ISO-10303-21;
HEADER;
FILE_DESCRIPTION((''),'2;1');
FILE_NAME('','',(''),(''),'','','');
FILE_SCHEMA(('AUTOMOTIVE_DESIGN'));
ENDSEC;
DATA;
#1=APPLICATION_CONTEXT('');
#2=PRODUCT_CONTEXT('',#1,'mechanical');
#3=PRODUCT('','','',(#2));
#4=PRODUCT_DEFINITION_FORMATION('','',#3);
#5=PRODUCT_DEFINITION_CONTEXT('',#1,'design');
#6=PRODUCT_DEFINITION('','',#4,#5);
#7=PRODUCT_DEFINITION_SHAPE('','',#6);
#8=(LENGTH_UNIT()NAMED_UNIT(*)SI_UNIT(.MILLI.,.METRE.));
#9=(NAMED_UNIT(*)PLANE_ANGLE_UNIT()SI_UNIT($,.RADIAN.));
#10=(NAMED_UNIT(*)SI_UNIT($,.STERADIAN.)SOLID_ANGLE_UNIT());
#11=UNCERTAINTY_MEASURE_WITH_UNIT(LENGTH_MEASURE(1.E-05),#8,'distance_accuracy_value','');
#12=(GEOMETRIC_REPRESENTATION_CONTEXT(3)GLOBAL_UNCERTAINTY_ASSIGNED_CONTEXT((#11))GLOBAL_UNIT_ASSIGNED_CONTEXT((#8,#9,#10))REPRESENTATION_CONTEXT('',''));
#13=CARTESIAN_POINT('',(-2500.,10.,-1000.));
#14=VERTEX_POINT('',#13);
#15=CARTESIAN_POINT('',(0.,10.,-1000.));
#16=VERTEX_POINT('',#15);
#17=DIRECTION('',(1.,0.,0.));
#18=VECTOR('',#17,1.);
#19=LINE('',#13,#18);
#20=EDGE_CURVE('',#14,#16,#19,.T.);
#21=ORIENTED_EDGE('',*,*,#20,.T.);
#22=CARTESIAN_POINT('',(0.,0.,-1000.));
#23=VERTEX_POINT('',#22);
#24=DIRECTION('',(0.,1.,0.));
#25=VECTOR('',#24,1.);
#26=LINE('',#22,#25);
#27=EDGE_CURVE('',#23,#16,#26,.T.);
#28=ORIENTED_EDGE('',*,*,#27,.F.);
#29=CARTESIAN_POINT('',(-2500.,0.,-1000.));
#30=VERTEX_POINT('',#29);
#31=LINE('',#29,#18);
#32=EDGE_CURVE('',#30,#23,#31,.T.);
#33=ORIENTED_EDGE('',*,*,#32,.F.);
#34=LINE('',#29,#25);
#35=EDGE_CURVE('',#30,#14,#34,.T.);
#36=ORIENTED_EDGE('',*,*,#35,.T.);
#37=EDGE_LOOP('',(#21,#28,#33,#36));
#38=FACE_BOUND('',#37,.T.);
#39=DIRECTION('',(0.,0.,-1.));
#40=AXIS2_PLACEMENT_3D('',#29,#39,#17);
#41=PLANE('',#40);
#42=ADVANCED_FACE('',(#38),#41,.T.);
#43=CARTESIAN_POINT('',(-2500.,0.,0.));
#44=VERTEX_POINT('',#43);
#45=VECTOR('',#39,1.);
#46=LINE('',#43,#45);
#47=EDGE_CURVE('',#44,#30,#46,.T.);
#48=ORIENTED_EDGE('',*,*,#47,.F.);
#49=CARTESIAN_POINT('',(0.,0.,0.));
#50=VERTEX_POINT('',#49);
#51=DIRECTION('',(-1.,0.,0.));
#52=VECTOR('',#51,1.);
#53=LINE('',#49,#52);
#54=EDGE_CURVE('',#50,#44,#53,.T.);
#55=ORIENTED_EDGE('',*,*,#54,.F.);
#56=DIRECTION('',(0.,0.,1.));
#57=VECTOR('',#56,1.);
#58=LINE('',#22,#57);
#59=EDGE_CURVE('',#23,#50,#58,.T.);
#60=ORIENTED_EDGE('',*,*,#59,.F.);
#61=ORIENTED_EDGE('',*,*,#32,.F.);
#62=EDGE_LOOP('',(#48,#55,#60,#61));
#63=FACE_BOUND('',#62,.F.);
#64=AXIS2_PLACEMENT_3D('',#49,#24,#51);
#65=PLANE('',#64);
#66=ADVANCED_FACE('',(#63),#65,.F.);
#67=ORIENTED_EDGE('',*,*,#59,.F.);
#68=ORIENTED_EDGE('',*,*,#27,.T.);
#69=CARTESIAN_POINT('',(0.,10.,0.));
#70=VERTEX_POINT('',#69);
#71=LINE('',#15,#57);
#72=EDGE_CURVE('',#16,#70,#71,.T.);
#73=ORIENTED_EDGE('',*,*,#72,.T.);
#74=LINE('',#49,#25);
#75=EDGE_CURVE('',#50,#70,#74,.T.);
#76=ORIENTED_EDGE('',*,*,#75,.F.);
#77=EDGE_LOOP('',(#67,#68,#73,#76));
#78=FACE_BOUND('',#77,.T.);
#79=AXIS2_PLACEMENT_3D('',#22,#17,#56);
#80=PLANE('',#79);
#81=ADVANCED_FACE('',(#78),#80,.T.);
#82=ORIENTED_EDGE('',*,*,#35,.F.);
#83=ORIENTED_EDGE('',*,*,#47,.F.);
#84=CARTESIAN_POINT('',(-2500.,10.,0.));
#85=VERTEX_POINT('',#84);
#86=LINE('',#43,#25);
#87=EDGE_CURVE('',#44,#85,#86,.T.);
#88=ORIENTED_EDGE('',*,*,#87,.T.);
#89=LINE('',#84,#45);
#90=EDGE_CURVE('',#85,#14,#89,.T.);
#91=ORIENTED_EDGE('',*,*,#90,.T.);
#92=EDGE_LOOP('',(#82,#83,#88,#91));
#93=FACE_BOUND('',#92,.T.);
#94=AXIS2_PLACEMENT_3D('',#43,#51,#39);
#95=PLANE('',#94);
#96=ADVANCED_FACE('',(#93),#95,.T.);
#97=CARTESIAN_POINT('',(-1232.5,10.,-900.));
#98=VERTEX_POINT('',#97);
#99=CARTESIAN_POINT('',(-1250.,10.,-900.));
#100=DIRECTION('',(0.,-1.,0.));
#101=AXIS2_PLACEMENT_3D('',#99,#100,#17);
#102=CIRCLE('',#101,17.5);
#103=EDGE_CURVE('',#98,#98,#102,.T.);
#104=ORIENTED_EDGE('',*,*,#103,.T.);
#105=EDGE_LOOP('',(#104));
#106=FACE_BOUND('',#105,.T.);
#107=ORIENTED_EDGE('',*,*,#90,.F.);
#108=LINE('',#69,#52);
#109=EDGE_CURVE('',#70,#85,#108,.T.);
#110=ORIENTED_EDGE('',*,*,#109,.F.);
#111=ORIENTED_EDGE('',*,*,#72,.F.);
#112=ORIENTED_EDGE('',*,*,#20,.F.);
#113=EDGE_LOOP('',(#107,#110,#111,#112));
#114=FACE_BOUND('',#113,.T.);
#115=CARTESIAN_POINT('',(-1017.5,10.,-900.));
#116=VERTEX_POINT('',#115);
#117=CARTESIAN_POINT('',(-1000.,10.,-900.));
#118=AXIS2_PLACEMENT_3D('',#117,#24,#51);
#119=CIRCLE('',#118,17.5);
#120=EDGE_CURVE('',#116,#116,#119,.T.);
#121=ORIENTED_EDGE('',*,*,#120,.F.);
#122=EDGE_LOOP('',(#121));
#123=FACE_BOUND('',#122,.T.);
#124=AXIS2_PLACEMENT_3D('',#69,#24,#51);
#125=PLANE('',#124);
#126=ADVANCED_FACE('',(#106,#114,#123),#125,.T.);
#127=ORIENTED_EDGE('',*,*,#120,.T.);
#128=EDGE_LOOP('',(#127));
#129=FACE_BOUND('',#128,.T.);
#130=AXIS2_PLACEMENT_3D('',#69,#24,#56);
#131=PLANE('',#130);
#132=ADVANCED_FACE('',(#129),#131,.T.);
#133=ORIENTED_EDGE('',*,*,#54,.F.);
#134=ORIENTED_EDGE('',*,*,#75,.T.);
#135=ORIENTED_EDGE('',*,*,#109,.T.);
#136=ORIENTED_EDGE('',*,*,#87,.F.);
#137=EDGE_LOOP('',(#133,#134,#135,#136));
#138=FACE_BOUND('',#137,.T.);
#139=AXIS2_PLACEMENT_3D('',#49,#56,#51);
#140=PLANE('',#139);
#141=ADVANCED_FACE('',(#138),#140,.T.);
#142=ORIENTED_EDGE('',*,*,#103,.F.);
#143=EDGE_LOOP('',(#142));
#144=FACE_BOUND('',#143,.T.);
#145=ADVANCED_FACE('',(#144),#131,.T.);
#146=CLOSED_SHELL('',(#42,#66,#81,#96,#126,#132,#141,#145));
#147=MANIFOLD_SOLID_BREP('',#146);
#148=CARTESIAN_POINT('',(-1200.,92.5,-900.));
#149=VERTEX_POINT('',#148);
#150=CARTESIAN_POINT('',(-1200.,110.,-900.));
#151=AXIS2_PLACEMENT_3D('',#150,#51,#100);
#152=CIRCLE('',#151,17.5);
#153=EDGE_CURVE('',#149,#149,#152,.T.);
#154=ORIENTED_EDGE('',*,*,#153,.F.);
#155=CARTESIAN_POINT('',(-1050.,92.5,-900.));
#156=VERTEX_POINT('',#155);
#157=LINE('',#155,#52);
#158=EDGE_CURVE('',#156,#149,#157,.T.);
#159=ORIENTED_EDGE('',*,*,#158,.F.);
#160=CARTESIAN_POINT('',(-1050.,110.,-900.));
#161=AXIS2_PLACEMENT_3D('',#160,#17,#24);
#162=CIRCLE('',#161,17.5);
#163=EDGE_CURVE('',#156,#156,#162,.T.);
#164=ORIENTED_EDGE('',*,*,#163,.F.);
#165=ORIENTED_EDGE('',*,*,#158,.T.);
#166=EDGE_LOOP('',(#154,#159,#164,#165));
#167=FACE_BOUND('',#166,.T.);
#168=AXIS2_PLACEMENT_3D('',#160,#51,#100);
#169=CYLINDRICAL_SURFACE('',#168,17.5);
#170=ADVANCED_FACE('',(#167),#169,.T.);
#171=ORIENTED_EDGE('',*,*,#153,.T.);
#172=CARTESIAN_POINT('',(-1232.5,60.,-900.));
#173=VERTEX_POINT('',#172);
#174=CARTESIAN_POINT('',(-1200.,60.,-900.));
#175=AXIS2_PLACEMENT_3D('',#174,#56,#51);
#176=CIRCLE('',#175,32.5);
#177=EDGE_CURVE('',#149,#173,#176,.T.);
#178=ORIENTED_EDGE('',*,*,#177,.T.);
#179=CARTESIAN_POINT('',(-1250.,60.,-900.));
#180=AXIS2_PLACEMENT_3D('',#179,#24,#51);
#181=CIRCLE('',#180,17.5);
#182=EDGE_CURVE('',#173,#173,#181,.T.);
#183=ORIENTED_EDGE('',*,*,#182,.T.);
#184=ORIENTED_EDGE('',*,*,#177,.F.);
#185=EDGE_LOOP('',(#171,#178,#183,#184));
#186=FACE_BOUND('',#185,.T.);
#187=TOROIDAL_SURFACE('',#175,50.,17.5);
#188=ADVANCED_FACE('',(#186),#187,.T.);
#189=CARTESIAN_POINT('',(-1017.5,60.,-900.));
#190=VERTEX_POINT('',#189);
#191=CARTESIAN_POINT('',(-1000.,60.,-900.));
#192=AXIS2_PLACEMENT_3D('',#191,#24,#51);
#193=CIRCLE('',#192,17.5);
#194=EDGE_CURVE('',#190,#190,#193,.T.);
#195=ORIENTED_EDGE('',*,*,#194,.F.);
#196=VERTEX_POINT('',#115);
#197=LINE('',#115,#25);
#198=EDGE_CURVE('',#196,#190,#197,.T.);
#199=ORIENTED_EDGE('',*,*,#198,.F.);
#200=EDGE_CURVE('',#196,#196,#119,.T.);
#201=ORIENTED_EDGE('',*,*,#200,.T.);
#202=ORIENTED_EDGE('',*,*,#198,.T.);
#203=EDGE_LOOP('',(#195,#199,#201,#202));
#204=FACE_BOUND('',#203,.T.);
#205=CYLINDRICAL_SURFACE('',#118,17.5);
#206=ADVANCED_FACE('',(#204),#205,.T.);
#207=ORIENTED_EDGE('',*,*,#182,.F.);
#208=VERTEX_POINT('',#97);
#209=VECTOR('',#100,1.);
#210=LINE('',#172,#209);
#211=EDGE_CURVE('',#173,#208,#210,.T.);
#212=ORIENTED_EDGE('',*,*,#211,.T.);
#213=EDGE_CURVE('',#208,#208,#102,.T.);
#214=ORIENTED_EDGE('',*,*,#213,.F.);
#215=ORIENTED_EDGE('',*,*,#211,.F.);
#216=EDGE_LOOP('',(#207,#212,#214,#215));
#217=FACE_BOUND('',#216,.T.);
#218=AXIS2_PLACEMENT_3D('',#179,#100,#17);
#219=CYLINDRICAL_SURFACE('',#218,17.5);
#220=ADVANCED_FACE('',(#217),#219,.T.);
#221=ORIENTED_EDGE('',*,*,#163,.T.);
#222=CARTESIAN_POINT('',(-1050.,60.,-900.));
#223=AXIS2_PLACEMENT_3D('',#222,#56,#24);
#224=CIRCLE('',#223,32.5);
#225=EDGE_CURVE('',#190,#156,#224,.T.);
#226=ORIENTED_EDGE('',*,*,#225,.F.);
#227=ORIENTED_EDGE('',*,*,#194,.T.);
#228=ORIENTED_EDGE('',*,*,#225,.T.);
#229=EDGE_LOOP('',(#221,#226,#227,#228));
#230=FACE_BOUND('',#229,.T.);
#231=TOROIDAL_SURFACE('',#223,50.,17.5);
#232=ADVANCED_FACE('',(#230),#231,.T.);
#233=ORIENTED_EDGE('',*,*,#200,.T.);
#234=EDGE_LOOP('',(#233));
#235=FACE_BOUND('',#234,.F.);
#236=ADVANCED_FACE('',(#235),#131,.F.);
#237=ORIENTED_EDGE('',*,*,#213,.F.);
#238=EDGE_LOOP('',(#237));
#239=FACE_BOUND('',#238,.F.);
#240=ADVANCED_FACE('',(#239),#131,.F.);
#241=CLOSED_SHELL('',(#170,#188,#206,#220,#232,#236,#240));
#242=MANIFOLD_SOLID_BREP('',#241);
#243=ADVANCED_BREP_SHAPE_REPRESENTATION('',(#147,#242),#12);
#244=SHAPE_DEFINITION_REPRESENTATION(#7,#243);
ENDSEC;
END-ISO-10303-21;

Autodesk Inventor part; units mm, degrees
ref_plane "YZ Plane" through (0, 0, 0) normal (1, 0, 0) x (0, 1, 0)
sketch "Sketch1" plane through (0, 0, 0) normal (0, 1, 0) x (-1, 0, 0)
  line L0 (0, 0) -> (2500, 0)
  line L1 (2500, 0) -> (2500, -1000)
  line L2 (2500, -1000) -> (0, -1000)
  line L3 (0, -1000) -> (0, 0)
  dimension "d0" = 2500
  dimension "d1" = 1000
extrude "Extrusion1" add sketch "Sketch1" along normal blind 10
sketch "Sketch2" plane through (0, 10, 0) normal (0, 1, 0) x (1, 0, 0)
  line L0 (-2500, 0) -> (0, 0) projected
  line L1 (0, 0) -> (0, 1000) projected
  line L2 (0, 1000) -> (-2500, 1000) projected
  line L3 (-2500, 1000) -> (-2500, 0) projected
  circle A0 centre (-1250, 900) radius 17.5
  dimension "d4" = 35
  dimension "d5" = 100
  dimension "d6" = 1250
ref_plane "Work Plane1" through (0, 0, -900) normal (0, 0, -1) x (-1, 0, 0)
sketch "Sketch3" plane through (0, 0, -900) normal (0, 0, -1) x (-1, 0, 0)
  line L0 (1000, 10) -> (1000, 60)
  line L1 (1050, 110) -> (1200, 110)
  line L2 (1250, 60) -> (1250, 10)
  arc A0 (1050, 110) -> (1000, 60) centre (1050, 60) ccw
  arc A1 (1250, 60) -> (1200, 110) centre (1200, 60) ccw
  point P0 (0, 0)
  point P1 (1000, 110)
  point P2 (1250, 110)
  dimension "d8" = 250
  dimension "d9" = 100
  dimension "d10" = 50
  dimension "d11" = 250
sweep "Sweep1" add profiles "Sketch2" path "Sketch3" contours A0
ref_plane "Work Plane2" through (0, 10, 0) normal (0, 1, 0) x (1, 0, 0)
split body "Split1" result two bodies by plane through (0, 10, 0) normal (0, 1, 0) first body at (-1150, 93.2201, -902.727)
properties part number "doorLeft" material "Glass"
